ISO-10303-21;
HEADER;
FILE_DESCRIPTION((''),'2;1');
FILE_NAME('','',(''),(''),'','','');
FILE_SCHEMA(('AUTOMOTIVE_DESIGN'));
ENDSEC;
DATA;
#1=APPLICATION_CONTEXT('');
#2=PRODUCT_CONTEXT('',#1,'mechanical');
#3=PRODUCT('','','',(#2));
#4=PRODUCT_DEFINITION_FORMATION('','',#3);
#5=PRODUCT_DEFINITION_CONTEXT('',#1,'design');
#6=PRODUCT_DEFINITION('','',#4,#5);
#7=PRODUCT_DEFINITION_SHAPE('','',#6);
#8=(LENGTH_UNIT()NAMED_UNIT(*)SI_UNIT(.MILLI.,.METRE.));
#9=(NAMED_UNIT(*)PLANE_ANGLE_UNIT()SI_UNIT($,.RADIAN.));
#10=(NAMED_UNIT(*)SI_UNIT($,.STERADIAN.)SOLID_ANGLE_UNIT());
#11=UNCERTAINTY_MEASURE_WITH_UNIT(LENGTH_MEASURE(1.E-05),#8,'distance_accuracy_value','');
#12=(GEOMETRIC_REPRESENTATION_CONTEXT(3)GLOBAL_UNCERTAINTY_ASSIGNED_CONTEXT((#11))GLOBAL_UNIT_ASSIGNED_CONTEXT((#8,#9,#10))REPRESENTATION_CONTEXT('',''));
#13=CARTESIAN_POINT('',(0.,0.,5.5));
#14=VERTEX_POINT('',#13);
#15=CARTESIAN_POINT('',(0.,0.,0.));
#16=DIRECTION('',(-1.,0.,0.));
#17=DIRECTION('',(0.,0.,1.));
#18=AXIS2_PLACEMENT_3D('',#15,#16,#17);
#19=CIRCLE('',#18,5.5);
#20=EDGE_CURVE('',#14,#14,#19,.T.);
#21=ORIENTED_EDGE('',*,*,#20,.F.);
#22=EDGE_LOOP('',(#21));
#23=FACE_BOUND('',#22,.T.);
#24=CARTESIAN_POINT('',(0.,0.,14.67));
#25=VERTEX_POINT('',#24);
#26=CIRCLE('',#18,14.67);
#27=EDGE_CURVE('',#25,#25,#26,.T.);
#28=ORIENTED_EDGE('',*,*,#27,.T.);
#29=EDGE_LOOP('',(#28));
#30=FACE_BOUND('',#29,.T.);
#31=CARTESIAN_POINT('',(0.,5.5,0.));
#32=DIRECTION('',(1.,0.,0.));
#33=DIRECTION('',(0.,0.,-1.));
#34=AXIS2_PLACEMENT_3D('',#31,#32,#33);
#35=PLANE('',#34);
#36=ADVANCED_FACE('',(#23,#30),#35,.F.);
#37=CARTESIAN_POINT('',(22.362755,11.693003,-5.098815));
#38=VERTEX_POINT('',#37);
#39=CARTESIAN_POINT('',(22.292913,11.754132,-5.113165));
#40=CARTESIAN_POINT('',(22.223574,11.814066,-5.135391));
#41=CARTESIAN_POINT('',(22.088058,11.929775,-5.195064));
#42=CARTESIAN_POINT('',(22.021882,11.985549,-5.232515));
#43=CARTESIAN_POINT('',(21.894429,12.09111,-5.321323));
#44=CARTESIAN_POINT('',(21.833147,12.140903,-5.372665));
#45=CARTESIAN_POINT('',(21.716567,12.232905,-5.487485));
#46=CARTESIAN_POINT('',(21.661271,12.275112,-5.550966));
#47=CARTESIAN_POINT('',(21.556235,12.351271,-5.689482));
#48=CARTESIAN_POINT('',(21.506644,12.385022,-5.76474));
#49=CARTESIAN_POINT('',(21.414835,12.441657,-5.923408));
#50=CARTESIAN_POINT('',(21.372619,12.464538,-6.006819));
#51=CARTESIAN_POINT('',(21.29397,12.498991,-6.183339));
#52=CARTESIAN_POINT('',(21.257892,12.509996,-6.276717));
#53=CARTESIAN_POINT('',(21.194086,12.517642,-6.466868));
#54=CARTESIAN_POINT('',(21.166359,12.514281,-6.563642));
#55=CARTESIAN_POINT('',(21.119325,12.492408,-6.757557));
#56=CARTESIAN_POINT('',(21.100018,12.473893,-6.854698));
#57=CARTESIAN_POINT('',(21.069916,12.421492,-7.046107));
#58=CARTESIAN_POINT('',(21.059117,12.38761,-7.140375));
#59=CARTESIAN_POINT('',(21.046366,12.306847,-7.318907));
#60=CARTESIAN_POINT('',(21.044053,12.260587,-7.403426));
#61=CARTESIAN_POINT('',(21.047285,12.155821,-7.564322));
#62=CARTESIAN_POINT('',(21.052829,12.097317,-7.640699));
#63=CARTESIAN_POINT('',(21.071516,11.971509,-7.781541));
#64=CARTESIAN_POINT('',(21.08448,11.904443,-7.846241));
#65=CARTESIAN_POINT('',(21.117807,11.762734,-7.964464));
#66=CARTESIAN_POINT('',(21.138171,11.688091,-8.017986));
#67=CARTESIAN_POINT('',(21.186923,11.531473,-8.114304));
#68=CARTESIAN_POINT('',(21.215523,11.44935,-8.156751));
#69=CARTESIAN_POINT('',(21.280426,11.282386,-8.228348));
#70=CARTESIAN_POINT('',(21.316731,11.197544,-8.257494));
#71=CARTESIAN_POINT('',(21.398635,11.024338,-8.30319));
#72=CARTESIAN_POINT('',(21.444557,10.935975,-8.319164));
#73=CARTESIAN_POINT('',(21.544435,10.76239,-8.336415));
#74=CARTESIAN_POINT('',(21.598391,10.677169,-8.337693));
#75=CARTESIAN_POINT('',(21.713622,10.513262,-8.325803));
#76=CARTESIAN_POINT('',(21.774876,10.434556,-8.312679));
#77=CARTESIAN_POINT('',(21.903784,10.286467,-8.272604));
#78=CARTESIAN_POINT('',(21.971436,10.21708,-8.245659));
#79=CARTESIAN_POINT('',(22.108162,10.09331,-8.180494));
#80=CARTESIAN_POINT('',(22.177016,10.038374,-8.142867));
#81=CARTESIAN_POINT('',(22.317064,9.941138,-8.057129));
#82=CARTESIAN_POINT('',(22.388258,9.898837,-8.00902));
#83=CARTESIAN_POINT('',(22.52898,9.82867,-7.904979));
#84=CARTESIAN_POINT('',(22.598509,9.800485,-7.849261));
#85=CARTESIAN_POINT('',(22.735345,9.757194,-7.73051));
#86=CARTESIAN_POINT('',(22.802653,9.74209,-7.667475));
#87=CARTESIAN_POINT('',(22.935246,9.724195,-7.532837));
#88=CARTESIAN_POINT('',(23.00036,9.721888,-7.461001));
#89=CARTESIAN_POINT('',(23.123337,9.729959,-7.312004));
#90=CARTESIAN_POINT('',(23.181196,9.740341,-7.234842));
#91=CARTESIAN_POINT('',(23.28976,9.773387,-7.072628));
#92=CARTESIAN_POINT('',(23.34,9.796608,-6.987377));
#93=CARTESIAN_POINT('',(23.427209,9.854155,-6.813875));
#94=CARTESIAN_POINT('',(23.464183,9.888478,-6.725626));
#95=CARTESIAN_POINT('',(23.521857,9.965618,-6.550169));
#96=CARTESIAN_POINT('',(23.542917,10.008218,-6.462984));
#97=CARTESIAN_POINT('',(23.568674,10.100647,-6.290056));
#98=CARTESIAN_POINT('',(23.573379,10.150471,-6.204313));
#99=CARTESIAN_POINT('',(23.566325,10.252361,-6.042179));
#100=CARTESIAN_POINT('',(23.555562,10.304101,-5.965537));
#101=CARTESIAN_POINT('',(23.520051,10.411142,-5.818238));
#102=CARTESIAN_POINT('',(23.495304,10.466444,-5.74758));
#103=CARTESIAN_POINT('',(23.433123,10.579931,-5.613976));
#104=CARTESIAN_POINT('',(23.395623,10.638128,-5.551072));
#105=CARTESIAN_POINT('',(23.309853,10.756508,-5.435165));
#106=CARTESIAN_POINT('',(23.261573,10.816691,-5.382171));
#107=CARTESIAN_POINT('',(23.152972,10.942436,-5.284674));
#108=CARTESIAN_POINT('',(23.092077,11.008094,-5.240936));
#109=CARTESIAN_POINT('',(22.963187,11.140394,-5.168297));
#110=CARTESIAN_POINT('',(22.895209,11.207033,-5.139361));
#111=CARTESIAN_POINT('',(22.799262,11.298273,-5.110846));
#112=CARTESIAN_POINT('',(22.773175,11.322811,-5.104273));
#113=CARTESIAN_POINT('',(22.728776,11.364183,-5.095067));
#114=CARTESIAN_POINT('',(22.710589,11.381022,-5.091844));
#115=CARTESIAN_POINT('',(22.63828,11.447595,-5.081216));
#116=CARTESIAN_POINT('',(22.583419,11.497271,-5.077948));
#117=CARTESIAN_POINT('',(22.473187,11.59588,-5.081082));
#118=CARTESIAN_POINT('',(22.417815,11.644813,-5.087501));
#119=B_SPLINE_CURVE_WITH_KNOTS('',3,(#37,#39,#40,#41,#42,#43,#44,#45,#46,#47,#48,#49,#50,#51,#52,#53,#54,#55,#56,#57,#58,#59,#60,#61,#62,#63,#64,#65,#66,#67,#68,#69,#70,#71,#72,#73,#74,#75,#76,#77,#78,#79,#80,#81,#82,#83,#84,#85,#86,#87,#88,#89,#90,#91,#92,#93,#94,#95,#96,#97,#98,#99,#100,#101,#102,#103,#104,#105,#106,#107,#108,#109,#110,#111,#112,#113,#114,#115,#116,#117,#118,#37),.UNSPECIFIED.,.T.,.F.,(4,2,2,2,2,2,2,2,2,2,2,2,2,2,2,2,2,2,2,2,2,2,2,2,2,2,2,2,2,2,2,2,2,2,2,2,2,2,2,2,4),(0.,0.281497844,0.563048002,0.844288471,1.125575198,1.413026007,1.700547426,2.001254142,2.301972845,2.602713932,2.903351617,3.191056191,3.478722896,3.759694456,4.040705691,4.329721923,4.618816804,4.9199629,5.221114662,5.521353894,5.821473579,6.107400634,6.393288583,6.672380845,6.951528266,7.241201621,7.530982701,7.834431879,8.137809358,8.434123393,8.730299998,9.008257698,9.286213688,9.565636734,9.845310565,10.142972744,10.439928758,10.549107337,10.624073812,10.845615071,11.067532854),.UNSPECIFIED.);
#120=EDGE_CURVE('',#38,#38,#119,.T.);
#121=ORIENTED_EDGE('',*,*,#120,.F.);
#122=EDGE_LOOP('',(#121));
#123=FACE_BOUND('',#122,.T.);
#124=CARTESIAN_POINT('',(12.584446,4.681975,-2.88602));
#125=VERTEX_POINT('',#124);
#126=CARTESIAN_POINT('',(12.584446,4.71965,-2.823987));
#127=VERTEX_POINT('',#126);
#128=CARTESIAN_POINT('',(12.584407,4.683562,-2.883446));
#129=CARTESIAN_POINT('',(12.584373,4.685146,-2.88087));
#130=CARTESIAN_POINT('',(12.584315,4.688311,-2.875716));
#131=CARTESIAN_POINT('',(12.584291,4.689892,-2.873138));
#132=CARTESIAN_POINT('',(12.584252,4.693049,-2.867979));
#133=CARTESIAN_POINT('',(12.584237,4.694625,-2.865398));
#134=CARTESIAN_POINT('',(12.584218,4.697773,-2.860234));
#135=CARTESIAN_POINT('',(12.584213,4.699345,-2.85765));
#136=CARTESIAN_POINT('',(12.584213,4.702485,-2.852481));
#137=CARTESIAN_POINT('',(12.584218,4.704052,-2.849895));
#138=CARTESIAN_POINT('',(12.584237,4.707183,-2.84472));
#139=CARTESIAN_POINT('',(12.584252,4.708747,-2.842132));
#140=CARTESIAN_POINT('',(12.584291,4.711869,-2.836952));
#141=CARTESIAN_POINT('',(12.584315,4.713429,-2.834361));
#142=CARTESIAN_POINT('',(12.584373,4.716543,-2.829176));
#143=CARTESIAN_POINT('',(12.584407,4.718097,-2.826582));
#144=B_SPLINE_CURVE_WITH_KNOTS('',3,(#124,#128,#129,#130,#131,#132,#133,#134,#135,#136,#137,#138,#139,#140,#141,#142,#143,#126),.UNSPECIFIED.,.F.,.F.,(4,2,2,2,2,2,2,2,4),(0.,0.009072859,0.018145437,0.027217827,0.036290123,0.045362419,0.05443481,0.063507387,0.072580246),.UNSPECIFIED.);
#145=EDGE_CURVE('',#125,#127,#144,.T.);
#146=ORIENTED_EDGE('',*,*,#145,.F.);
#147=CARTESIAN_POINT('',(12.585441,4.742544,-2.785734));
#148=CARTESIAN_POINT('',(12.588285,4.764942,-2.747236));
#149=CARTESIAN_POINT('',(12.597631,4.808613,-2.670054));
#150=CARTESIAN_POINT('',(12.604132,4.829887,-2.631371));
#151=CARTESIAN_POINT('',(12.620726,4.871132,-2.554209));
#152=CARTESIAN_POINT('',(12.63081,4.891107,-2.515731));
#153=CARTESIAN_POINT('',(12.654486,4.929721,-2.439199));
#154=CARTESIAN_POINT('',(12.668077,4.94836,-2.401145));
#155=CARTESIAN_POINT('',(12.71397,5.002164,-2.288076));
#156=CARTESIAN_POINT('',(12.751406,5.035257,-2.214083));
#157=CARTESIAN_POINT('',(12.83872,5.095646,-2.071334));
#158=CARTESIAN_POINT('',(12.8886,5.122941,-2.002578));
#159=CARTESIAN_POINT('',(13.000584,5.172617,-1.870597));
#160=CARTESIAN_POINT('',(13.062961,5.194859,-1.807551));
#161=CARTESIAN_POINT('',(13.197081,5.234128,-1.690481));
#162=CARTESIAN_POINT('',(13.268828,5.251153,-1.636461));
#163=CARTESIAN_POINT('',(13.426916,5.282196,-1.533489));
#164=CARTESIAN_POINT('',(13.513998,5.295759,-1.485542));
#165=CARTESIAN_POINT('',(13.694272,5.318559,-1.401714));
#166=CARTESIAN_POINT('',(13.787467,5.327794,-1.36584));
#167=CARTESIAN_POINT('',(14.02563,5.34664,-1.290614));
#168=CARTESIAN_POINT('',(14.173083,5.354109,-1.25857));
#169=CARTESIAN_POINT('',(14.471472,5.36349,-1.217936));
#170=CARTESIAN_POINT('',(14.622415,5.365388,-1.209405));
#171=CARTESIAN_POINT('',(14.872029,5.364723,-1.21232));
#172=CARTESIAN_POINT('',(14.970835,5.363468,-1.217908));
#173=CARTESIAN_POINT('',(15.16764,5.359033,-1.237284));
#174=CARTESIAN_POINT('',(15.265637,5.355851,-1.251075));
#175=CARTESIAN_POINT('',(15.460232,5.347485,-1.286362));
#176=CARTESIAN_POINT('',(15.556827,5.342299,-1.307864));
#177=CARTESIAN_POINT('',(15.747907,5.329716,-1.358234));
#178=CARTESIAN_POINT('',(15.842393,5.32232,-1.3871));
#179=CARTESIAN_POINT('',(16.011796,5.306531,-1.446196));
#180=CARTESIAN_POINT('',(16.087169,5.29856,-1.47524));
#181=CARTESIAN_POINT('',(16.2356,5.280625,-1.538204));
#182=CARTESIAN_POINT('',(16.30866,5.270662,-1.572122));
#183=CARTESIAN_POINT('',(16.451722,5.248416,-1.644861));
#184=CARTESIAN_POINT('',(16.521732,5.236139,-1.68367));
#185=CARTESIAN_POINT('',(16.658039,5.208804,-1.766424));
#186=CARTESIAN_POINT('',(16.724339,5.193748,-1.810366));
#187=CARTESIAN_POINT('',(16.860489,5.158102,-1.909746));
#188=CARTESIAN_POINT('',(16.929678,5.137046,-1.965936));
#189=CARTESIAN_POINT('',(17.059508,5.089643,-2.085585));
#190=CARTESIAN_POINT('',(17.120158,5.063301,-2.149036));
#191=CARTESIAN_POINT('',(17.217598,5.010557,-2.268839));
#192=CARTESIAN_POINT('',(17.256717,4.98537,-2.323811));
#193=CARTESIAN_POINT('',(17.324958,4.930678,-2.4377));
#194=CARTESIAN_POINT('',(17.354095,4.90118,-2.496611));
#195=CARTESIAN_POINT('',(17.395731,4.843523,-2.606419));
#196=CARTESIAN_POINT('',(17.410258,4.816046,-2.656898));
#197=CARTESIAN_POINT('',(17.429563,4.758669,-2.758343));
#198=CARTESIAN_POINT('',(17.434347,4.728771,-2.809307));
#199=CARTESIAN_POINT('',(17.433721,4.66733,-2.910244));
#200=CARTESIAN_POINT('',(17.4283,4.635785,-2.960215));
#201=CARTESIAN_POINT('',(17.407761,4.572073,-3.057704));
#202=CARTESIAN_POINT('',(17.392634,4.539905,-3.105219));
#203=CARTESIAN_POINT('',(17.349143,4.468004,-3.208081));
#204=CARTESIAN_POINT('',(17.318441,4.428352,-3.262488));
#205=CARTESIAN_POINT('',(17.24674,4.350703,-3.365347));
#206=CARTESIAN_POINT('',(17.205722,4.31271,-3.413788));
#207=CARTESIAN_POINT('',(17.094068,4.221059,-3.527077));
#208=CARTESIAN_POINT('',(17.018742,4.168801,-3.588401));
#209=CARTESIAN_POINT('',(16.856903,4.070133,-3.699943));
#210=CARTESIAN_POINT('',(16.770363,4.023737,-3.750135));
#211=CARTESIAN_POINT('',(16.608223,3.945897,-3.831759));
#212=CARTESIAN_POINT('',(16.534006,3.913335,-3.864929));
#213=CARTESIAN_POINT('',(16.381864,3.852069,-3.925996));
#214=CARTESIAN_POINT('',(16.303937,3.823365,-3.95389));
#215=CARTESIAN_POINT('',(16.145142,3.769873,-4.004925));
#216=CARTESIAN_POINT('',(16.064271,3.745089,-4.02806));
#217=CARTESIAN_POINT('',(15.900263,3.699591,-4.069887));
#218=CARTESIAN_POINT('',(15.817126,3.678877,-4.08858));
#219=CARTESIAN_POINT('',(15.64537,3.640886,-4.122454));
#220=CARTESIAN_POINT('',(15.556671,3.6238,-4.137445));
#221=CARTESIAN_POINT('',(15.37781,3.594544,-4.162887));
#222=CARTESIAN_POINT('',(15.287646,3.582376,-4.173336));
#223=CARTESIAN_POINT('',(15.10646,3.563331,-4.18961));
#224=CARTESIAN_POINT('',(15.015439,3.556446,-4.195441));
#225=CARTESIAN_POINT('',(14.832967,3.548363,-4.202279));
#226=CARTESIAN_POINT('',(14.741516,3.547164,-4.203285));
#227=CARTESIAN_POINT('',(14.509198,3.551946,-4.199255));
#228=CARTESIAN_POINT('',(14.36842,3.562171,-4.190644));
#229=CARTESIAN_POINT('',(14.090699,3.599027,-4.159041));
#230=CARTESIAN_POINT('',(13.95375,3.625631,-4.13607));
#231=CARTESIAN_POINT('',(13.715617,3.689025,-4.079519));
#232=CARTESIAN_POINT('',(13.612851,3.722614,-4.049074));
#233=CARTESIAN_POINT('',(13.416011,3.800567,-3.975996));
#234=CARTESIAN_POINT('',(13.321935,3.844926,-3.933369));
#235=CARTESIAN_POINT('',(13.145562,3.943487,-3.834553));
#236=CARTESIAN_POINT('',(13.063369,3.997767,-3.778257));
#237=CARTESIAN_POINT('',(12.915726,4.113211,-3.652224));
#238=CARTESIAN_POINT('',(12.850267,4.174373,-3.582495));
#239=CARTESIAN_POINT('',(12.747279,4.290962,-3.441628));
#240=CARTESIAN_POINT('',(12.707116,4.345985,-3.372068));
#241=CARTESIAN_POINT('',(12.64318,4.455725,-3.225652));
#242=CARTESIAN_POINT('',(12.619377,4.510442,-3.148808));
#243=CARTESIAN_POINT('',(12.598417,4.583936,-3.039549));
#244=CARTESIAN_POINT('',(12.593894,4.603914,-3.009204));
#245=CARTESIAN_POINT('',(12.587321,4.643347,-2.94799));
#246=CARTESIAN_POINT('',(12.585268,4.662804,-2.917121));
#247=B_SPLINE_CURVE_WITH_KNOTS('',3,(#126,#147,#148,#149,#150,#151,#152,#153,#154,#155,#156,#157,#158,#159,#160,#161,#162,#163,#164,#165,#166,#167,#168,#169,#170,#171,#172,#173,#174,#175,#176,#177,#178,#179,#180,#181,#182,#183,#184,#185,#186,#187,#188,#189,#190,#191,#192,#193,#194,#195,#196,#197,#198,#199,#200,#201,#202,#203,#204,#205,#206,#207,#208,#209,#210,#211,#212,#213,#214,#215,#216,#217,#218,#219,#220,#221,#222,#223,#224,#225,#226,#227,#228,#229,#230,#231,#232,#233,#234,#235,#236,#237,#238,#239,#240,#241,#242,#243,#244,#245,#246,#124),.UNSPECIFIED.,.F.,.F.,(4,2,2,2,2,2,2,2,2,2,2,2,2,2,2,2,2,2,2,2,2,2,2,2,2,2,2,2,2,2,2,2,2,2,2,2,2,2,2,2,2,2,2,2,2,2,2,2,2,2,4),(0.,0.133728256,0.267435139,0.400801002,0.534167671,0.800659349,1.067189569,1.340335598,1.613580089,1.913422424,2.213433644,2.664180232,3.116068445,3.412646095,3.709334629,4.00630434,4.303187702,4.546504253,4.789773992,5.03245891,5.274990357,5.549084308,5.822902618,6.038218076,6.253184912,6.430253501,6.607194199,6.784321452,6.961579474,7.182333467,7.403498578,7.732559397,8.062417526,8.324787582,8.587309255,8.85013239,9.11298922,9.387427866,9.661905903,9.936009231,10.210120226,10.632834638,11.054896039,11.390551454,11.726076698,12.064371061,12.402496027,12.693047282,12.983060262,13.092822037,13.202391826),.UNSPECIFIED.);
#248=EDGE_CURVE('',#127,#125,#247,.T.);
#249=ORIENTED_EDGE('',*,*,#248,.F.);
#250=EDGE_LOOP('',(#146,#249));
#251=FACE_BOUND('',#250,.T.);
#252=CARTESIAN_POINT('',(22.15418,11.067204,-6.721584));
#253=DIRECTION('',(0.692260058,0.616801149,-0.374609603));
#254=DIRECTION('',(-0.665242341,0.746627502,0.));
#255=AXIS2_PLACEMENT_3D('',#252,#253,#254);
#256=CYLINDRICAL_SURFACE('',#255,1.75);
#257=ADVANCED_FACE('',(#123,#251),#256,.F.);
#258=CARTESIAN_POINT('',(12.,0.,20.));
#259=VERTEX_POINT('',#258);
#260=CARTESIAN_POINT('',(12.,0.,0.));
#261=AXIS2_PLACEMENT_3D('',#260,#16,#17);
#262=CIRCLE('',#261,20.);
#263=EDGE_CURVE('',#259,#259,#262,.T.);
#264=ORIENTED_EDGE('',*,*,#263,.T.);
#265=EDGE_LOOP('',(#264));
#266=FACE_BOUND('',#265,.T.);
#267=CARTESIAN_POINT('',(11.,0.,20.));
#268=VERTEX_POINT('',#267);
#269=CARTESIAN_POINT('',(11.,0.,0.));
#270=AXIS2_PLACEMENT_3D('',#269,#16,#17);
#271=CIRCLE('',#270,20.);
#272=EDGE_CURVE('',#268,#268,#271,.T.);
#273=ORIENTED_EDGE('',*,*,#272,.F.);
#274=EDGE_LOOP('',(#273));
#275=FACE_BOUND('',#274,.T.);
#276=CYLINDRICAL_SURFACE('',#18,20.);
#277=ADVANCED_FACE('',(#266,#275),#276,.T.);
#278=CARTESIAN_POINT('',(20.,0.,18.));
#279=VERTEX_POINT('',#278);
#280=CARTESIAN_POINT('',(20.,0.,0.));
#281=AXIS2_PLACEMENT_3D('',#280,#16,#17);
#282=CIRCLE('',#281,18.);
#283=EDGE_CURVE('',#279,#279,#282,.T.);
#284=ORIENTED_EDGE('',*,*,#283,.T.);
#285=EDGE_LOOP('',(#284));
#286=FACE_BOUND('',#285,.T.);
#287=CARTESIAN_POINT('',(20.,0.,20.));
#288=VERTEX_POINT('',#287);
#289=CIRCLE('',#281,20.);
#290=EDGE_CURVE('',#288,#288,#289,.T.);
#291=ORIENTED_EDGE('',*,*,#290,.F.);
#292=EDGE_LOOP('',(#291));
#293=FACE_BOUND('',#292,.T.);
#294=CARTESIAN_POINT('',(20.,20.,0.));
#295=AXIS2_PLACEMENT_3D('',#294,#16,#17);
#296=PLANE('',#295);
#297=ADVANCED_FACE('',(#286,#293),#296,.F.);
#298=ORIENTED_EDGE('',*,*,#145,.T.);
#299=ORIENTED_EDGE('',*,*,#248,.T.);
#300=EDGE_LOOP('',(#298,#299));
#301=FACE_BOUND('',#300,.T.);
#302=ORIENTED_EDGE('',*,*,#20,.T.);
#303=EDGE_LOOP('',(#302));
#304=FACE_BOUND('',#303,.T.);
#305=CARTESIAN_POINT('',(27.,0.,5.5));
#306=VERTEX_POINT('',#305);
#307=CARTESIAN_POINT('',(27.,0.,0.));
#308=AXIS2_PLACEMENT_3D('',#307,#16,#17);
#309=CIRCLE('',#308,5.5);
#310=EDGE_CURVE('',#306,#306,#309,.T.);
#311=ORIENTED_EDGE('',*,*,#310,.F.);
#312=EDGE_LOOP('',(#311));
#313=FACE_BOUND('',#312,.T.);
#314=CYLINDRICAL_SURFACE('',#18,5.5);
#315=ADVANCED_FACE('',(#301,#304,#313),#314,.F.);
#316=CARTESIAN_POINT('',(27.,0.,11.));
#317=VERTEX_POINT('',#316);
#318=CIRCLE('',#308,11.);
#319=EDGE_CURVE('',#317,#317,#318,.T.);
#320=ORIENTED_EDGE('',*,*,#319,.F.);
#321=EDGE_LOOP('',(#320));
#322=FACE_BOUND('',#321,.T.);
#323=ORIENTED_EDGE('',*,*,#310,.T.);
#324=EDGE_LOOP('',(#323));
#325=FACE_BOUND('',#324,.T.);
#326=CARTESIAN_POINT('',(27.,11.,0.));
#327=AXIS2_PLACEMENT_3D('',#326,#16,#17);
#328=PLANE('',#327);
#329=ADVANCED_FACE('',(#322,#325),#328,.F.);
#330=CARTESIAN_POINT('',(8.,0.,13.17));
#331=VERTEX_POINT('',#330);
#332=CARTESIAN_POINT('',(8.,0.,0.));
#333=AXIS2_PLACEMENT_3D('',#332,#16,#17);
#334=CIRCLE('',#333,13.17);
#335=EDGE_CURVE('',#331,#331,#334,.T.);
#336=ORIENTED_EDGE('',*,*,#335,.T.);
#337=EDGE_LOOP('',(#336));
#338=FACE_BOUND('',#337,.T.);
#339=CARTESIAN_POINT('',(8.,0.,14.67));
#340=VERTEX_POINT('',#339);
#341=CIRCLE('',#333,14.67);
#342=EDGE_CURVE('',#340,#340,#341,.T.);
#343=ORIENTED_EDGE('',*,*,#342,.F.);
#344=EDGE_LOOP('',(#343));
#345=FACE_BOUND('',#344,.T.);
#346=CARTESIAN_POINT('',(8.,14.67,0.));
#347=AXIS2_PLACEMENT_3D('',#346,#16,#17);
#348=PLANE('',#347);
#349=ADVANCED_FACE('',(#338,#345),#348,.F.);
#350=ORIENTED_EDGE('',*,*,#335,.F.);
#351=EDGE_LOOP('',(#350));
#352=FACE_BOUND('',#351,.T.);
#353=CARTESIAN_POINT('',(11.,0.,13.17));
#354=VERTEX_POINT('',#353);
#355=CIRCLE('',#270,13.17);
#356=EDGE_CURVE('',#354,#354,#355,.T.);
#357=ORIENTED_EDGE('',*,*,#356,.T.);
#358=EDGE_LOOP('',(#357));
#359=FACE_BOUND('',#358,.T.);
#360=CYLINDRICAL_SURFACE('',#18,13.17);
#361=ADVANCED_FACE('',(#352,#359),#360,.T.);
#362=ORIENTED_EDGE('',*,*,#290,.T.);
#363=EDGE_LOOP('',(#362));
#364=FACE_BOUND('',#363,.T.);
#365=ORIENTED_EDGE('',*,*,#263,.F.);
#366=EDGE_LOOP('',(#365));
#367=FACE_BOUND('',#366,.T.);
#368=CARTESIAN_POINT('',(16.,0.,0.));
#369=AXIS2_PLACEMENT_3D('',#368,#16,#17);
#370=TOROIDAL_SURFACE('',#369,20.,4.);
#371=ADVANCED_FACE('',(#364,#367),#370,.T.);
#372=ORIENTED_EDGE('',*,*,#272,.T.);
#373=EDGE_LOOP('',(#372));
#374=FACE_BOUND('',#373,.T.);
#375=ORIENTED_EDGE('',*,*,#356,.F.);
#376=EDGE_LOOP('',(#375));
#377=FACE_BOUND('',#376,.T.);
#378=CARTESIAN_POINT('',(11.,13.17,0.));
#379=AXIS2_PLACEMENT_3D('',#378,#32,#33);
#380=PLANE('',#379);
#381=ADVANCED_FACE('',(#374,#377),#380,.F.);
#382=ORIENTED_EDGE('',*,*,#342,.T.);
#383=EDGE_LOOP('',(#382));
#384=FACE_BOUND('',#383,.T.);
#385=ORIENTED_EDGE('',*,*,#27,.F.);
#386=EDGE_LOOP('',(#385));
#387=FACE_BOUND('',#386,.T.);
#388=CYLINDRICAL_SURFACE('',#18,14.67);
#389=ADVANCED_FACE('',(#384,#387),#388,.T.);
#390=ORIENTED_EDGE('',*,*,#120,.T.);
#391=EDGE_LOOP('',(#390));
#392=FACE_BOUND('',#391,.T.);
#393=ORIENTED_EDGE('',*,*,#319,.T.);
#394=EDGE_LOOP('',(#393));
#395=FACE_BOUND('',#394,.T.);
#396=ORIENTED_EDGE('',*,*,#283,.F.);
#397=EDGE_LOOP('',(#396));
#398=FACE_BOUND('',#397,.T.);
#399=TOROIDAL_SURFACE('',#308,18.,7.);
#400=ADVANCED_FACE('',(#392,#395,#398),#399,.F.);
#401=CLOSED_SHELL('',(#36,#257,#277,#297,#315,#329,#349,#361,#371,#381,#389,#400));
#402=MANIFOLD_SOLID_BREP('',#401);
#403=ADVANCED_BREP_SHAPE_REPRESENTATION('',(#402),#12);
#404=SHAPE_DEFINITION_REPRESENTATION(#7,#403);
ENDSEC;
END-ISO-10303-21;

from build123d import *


with BuildPart() as part:
    # Sketch1 → Revolve1 (revolve)
    with BuildSketch(Plane.XY, mode=Mode.PRIVATE) as revolve1_sk:
        with BuildLine():
            Line((0, 5.5), (0, 14.67))
            Line((0, 14.67), (8, 14.67))
            Line((8, 14.67), (8, 13.17))
            Line((8, 13.17), (11, 13.17))
            Line((11, 13.17), (11, 20))
            Line((11, 20), (12, 20))
            ThreePointArc((12, 20), (16, 24), (20, 20))
            Line((20, 20), (20, 18))
            ThreePointArc((20, 18), (22.050252532, 13.050252532), (27, 11))
            Line((27, 11), (27, 5.5))
            Line((27, 5.5), (0, 5.5))
        make_face()
    revolve(revolve1_sk.sketch.rotate(Axis((0, 0, 0), (1, 0, 0)), 90), axis=Axis((0, 0, 0), (1, 0, 0)))

    # Ø3.5 (3.5) Diameter Hole2: read off the stored shape, not the designer's step
    # Ø3.5 (3.5) Diameter Hole2: loft between two sections, ruled curve by curve
    f_3_5_3_5_diameter_hole2_from = [
        Edge.make_three_point_arc((12.584394195, 4.719603739, -2.823958877), (13.87319466, 4.552306942, -0.717776277), (15.109619522, 2.611483824, -1.628522776)),
        Edge.make_three_point_arc((15.109619522, 2.611483824, -1.628522776), (13.820819057, 2.778780621, -3.734705376), (12.584394195, 4.719603739, -2.823958877)),
    ]
    f_3_5_3_5_diameter_hole2_to = [
        Edge.make_three_point_arc((21.045529414, 12.258443907, -7.402617534), (22.334329879, 12.09114711, -5.296434934), (23.570754741, 10.150323992, -6.207181432)),
        Edge.make_three_point_arc((23.570754741, 10.150323992, -6.207181432), (22.281954276, 10.317620789, -8.313364032), (21.045529414, 12.258443907, -7.402617534)),
    ]
    f_3_5_3_5_diameter_hole2 = Solid(Shell([*[Face.make_surface_from_curves(f_3_5_3_5_diameter_hole2_from[k], f_3_5_3_5_diameter_hole2_to[k]) for k in range(2)], Face(Wire(f_3_5_3_5_diameter_hole2_from)), Face(Wire(f_3_5_3_5_diameter_hole2_to))]))
    add(f_3_5_3_5_diameter_hole2, mode=Mode.SUBTRACT)


solid = part.part
